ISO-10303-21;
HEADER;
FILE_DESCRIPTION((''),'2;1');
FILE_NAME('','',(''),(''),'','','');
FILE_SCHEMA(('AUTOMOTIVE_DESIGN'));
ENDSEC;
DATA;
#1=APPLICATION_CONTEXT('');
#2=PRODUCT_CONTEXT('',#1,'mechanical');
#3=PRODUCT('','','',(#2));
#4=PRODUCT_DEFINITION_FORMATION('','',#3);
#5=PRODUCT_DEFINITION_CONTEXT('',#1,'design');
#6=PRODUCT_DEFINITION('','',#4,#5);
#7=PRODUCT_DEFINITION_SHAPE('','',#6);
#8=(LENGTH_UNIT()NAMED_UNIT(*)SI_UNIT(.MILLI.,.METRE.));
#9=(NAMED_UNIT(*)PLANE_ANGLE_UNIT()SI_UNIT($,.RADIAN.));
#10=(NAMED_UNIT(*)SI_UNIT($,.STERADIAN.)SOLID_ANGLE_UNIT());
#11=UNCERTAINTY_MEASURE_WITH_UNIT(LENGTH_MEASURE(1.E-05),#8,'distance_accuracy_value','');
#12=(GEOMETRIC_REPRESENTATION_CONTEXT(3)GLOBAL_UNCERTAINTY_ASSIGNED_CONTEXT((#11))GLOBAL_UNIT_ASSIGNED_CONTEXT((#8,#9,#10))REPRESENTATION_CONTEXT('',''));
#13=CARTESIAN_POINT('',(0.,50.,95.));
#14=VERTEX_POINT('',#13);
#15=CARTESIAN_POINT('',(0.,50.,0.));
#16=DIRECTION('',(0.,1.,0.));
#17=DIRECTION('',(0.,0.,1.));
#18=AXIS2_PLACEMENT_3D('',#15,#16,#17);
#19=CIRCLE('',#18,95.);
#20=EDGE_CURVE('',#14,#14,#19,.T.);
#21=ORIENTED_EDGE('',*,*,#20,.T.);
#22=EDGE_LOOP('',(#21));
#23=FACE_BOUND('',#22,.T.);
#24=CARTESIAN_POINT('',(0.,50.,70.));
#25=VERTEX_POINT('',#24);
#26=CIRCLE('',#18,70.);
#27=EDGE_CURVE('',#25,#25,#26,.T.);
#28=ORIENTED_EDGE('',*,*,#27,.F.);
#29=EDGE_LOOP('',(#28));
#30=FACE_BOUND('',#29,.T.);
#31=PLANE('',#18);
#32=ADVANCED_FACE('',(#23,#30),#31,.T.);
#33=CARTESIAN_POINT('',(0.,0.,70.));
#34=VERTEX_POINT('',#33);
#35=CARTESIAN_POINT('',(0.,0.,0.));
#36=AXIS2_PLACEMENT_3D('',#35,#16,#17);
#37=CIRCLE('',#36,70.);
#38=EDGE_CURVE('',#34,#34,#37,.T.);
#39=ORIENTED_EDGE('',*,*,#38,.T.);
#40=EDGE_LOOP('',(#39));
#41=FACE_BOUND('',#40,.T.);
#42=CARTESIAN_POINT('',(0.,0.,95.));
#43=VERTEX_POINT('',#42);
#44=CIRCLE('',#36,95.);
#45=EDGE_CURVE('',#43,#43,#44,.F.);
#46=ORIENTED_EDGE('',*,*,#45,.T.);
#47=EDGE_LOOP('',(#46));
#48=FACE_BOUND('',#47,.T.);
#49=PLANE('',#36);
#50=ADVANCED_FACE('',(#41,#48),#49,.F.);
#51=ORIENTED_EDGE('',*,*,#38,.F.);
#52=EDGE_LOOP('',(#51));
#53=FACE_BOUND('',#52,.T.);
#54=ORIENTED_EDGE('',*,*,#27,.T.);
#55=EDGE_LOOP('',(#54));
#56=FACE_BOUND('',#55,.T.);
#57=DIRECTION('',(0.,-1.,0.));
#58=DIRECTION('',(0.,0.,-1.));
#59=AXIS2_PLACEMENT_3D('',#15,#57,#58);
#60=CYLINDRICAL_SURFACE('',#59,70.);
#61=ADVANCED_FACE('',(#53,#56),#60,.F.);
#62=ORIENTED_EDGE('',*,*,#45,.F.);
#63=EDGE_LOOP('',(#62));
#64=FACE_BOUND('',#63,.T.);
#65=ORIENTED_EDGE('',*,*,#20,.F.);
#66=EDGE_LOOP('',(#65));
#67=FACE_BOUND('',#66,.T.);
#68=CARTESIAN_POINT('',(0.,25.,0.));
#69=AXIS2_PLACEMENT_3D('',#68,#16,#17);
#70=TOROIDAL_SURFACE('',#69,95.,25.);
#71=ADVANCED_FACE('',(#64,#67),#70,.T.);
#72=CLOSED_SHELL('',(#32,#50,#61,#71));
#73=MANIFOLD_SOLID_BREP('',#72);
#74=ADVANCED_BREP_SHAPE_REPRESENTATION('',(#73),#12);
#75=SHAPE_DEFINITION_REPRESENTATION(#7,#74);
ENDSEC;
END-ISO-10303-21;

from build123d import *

# Parameters (mm, degrees)
SKETCH1_R           = 120
SKETCH1_R_2         = 70
BOSS_EXTRUDE1_DEPTH = 50
FILLET2_R           = 25


with BuildPart() as part:
    # Sketch1 → Boss-Extrude1 (new body)
    with BuildSketch(Plane(origin=(0, 0, 0), x_dir=(1, 0, 0), z_dir=(0, 1, 0))):
        with Locations(Location((0, 0, 0), (0, 0, 270))):
            Circle(SKETCH1_R)
        with Locations(Location((0, 0, 0), (0, 0, 270))):
            Circle(SKETCH1_R_2, mode=Mode.SUBTRACT)
    extrude(amount=BOSS_EXTRUDE1_DEPTH)

    # Fillet2
    fillet2_edges = [part.edges().sort_by_distance(p)[0] for p in [
        (0, 0, -120),
        (0, 50, -120),
    ]]
    fillet(fillet2_edges, radius=FILLET2_R - 0.0001)  # a hair under: the kernel refuses the full size


solid = part.part
